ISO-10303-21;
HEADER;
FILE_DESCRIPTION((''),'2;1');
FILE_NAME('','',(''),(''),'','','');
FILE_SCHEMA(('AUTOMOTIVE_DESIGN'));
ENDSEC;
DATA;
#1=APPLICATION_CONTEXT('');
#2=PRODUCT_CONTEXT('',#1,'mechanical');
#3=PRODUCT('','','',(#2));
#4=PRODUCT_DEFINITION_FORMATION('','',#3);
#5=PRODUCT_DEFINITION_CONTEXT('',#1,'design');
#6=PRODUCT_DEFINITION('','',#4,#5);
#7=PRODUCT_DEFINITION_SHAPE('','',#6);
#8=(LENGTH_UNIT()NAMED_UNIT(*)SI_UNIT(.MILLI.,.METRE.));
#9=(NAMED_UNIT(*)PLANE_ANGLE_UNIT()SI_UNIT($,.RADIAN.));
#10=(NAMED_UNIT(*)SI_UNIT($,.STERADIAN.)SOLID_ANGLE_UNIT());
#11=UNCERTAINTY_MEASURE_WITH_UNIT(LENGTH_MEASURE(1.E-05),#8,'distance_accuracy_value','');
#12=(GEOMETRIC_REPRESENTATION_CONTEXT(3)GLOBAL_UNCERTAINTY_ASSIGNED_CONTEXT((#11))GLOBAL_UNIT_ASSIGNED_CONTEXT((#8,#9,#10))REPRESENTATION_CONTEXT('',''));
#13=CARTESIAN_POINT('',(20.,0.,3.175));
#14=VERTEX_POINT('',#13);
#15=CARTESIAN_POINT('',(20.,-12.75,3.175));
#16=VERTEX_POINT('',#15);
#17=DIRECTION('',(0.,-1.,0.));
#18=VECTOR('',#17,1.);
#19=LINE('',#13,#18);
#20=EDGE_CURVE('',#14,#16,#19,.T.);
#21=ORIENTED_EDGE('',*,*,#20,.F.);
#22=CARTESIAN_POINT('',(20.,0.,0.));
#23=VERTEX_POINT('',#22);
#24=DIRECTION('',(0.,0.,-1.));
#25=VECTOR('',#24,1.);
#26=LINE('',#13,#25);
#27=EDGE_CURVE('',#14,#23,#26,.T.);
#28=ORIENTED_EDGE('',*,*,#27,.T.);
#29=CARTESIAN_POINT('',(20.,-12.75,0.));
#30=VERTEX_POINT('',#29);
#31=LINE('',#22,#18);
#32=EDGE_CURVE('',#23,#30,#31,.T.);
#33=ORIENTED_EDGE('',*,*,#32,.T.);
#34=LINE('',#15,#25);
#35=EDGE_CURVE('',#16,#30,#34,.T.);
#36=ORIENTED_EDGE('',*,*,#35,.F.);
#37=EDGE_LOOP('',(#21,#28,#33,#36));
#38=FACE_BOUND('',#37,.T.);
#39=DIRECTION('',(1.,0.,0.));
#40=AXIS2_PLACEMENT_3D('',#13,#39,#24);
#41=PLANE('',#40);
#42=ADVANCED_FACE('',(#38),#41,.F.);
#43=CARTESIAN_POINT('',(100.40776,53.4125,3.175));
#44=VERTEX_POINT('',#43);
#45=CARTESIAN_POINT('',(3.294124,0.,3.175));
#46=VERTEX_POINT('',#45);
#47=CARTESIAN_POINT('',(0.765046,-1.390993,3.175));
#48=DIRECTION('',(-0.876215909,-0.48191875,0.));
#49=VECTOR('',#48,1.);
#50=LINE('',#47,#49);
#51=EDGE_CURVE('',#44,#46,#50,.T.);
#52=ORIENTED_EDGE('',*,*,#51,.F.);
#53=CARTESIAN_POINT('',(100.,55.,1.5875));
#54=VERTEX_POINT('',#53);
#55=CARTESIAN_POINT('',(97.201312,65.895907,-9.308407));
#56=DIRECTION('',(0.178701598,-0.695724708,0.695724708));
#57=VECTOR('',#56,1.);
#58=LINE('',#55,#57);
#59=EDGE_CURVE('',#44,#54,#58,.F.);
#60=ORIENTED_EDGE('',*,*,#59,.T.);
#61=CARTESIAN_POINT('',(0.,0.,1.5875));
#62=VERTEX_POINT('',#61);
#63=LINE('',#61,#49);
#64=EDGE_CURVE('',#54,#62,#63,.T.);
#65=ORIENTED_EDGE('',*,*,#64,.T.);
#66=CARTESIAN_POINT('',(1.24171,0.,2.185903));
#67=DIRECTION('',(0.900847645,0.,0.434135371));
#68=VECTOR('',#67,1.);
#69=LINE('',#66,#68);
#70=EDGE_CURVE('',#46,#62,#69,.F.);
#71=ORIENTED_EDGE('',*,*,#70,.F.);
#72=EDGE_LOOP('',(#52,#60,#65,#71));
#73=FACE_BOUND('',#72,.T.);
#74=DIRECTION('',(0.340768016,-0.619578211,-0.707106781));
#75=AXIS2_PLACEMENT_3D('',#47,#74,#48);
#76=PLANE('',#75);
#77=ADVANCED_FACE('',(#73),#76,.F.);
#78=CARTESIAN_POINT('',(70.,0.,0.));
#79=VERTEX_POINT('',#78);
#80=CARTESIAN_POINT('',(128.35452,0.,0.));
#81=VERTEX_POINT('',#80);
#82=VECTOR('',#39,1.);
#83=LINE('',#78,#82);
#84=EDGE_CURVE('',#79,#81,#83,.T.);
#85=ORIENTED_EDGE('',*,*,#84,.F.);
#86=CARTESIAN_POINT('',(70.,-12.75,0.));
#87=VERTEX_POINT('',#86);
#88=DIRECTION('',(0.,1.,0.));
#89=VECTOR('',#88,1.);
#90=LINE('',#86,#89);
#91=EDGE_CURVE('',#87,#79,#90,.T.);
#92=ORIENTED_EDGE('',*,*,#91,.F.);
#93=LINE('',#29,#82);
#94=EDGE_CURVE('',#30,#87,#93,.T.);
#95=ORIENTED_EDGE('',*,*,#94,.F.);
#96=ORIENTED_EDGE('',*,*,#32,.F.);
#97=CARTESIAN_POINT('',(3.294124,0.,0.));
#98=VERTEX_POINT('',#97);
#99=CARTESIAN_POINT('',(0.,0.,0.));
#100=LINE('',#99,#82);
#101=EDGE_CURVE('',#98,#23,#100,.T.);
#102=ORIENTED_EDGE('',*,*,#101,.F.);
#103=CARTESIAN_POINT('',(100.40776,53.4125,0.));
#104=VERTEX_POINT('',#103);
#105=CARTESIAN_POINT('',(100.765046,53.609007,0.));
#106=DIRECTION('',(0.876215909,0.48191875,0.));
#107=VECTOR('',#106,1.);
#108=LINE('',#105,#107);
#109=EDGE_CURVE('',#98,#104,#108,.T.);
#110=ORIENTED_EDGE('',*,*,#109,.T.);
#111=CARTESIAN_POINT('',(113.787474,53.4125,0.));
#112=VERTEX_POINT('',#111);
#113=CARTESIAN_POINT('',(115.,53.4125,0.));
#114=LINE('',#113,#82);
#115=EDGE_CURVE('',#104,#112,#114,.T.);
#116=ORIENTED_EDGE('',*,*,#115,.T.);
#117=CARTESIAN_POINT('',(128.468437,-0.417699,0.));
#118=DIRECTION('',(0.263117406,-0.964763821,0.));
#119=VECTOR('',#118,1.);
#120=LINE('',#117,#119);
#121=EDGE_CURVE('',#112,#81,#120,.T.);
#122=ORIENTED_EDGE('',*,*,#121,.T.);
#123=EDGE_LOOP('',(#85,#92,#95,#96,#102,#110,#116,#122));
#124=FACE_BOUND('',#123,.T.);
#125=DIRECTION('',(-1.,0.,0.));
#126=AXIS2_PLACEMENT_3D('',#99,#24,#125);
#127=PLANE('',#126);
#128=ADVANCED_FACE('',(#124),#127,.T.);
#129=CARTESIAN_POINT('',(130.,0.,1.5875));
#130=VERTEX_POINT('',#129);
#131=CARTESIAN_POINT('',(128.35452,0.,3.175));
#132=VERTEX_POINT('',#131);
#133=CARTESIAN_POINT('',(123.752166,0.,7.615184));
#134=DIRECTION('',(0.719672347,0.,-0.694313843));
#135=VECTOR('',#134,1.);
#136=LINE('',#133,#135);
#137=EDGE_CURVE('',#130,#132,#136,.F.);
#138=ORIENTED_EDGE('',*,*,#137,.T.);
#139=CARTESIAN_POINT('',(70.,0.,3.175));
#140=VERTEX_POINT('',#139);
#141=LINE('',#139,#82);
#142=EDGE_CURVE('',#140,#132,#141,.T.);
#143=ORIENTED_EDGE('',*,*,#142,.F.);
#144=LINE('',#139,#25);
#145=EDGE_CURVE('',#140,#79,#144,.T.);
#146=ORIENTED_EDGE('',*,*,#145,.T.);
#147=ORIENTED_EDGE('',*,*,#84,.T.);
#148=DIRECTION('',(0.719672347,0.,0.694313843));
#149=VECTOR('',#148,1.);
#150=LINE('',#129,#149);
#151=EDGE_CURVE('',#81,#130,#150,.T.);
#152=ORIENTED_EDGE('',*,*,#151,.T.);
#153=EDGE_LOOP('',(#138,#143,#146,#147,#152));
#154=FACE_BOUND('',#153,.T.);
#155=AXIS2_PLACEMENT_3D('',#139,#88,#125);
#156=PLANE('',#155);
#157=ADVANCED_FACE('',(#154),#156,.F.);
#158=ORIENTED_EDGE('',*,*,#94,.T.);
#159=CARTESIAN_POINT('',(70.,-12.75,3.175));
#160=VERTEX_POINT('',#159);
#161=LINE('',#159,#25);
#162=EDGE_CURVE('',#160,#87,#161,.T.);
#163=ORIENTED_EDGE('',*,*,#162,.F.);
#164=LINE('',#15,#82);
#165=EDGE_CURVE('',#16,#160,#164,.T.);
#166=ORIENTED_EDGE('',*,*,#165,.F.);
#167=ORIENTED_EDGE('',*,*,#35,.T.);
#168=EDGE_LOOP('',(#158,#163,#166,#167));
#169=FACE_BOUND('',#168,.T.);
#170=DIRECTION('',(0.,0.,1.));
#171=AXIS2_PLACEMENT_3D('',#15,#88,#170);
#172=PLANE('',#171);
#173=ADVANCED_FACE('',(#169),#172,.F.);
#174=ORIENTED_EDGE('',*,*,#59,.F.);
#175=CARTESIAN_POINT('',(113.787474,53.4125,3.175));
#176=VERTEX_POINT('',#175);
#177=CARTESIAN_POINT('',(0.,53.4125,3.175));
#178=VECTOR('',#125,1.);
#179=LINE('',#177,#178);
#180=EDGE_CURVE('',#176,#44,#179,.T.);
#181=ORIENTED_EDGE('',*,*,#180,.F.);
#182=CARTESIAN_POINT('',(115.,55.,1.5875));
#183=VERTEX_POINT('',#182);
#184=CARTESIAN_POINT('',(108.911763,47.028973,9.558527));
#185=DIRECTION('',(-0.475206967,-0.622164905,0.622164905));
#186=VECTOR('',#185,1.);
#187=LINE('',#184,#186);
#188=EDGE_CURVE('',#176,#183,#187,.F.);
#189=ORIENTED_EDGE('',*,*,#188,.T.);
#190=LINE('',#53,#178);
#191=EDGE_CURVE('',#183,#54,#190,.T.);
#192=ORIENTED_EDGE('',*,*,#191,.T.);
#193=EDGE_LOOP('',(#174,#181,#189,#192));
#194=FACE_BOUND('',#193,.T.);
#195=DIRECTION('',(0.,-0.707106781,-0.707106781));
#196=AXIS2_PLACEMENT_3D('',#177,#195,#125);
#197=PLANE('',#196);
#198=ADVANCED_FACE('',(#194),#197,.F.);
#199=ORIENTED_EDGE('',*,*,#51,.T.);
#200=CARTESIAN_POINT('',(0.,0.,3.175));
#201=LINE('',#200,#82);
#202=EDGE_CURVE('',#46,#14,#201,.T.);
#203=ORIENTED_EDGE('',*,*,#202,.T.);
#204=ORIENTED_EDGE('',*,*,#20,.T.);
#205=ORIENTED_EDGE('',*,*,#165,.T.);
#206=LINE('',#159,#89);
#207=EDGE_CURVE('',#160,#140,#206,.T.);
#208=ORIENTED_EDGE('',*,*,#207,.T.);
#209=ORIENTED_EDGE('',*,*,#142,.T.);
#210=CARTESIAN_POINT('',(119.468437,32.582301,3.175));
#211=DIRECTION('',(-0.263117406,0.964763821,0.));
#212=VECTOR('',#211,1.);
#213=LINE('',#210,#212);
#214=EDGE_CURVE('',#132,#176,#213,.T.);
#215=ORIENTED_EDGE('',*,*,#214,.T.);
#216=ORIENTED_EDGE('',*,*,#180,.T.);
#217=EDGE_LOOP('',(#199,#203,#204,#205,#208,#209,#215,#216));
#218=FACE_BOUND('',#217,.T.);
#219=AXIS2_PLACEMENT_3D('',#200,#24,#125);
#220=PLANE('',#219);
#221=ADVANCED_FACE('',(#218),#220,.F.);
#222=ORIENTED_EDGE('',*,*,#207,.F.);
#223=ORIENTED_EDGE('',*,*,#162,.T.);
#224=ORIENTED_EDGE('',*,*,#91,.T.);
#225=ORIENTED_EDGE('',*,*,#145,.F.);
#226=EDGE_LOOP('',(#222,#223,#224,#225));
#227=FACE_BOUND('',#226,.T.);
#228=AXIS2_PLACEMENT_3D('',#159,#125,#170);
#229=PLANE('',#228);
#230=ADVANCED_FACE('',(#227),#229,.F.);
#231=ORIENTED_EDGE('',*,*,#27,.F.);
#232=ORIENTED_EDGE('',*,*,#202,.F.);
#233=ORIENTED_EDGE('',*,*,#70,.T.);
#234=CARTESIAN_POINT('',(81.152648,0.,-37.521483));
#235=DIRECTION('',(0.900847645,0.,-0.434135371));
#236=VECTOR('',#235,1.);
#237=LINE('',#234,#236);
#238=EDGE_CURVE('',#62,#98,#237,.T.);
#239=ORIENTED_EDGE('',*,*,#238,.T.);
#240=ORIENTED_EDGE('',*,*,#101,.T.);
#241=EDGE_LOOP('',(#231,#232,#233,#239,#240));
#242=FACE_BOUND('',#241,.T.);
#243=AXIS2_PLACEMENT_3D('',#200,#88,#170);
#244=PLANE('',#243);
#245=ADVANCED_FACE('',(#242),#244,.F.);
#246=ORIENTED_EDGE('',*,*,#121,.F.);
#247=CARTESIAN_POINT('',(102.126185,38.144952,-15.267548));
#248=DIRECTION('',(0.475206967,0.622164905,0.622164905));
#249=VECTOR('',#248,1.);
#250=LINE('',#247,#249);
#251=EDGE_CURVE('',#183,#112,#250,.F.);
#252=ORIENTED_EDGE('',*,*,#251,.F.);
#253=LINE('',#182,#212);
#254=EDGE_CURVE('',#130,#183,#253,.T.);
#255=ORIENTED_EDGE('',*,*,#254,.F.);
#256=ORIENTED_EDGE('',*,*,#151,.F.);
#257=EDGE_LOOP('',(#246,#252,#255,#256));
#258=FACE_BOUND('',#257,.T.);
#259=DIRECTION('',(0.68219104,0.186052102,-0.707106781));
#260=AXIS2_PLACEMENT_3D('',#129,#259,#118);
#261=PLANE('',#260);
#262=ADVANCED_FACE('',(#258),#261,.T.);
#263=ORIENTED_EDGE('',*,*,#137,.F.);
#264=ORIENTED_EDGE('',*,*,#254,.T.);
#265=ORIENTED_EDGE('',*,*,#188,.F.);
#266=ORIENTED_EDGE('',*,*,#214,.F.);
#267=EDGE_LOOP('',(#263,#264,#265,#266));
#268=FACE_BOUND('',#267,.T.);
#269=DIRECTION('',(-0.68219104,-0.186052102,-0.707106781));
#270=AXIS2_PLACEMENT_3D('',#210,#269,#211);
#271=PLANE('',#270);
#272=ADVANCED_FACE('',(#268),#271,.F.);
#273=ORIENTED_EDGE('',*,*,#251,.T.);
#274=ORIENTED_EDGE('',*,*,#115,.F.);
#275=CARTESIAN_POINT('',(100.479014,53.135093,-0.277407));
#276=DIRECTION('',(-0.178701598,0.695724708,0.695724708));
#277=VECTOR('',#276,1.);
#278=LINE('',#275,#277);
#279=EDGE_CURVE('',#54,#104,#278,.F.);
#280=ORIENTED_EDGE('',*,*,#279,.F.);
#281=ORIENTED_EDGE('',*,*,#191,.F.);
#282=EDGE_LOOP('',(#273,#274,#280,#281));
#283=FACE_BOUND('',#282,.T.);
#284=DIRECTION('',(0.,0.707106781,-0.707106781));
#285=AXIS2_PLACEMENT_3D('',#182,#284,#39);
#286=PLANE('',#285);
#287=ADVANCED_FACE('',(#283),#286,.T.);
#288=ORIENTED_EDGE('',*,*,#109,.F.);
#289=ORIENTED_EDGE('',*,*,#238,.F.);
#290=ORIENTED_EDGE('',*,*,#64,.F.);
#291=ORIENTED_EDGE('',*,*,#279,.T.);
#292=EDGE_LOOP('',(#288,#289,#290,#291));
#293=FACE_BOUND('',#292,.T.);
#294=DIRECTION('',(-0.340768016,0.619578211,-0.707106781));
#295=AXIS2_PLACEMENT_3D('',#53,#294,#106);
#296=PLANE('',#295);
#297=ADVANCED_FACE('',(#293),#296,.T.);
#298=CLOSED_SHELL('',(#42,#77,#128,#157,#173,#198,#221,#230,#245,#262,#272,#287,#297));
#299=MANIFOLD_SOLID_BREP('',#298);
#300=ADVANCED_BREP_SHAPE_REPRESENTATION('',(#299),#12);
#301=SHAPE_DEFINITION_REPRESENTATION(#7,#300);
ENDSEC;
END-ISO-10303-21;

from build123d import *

# Parameters (mm, degrees)
BOSS_EXTRUDE1_DEPTH = 3.175
CHAMFER1_SIZE       = 1.5875


with BuildPart() as part:
    # Sketch1 → Boss-Extrude1 (new body)
    with BuildSketch(Plane.XY):
        Polygon((0, 0), (20, 0), (20, -12.75), (70, -12.75), (70, 0), (130, 0), (115, 55), (100, 55), align=None)
    extrude(amount=BOSS_EXTRUDE1_DEPTH)

    # Chamfer1
    chamfer1_edges = [part.edges().sort_by_distance(p)[0] for p in [
        (50, 27.5, 3.175),
        (107.5, 55, 3.175),
        (122.5, 27.5, 3.175),
        (50, 27.5, 0),
        (107.5, 55, 0),
        (122.5, 27.5, 0),
    ]]
    chamfer(chamfer1_edges, length=CHAMFER1_SIZE - 0.0001)  # a hair under: the kernel refuses the full size


solid = part.part
